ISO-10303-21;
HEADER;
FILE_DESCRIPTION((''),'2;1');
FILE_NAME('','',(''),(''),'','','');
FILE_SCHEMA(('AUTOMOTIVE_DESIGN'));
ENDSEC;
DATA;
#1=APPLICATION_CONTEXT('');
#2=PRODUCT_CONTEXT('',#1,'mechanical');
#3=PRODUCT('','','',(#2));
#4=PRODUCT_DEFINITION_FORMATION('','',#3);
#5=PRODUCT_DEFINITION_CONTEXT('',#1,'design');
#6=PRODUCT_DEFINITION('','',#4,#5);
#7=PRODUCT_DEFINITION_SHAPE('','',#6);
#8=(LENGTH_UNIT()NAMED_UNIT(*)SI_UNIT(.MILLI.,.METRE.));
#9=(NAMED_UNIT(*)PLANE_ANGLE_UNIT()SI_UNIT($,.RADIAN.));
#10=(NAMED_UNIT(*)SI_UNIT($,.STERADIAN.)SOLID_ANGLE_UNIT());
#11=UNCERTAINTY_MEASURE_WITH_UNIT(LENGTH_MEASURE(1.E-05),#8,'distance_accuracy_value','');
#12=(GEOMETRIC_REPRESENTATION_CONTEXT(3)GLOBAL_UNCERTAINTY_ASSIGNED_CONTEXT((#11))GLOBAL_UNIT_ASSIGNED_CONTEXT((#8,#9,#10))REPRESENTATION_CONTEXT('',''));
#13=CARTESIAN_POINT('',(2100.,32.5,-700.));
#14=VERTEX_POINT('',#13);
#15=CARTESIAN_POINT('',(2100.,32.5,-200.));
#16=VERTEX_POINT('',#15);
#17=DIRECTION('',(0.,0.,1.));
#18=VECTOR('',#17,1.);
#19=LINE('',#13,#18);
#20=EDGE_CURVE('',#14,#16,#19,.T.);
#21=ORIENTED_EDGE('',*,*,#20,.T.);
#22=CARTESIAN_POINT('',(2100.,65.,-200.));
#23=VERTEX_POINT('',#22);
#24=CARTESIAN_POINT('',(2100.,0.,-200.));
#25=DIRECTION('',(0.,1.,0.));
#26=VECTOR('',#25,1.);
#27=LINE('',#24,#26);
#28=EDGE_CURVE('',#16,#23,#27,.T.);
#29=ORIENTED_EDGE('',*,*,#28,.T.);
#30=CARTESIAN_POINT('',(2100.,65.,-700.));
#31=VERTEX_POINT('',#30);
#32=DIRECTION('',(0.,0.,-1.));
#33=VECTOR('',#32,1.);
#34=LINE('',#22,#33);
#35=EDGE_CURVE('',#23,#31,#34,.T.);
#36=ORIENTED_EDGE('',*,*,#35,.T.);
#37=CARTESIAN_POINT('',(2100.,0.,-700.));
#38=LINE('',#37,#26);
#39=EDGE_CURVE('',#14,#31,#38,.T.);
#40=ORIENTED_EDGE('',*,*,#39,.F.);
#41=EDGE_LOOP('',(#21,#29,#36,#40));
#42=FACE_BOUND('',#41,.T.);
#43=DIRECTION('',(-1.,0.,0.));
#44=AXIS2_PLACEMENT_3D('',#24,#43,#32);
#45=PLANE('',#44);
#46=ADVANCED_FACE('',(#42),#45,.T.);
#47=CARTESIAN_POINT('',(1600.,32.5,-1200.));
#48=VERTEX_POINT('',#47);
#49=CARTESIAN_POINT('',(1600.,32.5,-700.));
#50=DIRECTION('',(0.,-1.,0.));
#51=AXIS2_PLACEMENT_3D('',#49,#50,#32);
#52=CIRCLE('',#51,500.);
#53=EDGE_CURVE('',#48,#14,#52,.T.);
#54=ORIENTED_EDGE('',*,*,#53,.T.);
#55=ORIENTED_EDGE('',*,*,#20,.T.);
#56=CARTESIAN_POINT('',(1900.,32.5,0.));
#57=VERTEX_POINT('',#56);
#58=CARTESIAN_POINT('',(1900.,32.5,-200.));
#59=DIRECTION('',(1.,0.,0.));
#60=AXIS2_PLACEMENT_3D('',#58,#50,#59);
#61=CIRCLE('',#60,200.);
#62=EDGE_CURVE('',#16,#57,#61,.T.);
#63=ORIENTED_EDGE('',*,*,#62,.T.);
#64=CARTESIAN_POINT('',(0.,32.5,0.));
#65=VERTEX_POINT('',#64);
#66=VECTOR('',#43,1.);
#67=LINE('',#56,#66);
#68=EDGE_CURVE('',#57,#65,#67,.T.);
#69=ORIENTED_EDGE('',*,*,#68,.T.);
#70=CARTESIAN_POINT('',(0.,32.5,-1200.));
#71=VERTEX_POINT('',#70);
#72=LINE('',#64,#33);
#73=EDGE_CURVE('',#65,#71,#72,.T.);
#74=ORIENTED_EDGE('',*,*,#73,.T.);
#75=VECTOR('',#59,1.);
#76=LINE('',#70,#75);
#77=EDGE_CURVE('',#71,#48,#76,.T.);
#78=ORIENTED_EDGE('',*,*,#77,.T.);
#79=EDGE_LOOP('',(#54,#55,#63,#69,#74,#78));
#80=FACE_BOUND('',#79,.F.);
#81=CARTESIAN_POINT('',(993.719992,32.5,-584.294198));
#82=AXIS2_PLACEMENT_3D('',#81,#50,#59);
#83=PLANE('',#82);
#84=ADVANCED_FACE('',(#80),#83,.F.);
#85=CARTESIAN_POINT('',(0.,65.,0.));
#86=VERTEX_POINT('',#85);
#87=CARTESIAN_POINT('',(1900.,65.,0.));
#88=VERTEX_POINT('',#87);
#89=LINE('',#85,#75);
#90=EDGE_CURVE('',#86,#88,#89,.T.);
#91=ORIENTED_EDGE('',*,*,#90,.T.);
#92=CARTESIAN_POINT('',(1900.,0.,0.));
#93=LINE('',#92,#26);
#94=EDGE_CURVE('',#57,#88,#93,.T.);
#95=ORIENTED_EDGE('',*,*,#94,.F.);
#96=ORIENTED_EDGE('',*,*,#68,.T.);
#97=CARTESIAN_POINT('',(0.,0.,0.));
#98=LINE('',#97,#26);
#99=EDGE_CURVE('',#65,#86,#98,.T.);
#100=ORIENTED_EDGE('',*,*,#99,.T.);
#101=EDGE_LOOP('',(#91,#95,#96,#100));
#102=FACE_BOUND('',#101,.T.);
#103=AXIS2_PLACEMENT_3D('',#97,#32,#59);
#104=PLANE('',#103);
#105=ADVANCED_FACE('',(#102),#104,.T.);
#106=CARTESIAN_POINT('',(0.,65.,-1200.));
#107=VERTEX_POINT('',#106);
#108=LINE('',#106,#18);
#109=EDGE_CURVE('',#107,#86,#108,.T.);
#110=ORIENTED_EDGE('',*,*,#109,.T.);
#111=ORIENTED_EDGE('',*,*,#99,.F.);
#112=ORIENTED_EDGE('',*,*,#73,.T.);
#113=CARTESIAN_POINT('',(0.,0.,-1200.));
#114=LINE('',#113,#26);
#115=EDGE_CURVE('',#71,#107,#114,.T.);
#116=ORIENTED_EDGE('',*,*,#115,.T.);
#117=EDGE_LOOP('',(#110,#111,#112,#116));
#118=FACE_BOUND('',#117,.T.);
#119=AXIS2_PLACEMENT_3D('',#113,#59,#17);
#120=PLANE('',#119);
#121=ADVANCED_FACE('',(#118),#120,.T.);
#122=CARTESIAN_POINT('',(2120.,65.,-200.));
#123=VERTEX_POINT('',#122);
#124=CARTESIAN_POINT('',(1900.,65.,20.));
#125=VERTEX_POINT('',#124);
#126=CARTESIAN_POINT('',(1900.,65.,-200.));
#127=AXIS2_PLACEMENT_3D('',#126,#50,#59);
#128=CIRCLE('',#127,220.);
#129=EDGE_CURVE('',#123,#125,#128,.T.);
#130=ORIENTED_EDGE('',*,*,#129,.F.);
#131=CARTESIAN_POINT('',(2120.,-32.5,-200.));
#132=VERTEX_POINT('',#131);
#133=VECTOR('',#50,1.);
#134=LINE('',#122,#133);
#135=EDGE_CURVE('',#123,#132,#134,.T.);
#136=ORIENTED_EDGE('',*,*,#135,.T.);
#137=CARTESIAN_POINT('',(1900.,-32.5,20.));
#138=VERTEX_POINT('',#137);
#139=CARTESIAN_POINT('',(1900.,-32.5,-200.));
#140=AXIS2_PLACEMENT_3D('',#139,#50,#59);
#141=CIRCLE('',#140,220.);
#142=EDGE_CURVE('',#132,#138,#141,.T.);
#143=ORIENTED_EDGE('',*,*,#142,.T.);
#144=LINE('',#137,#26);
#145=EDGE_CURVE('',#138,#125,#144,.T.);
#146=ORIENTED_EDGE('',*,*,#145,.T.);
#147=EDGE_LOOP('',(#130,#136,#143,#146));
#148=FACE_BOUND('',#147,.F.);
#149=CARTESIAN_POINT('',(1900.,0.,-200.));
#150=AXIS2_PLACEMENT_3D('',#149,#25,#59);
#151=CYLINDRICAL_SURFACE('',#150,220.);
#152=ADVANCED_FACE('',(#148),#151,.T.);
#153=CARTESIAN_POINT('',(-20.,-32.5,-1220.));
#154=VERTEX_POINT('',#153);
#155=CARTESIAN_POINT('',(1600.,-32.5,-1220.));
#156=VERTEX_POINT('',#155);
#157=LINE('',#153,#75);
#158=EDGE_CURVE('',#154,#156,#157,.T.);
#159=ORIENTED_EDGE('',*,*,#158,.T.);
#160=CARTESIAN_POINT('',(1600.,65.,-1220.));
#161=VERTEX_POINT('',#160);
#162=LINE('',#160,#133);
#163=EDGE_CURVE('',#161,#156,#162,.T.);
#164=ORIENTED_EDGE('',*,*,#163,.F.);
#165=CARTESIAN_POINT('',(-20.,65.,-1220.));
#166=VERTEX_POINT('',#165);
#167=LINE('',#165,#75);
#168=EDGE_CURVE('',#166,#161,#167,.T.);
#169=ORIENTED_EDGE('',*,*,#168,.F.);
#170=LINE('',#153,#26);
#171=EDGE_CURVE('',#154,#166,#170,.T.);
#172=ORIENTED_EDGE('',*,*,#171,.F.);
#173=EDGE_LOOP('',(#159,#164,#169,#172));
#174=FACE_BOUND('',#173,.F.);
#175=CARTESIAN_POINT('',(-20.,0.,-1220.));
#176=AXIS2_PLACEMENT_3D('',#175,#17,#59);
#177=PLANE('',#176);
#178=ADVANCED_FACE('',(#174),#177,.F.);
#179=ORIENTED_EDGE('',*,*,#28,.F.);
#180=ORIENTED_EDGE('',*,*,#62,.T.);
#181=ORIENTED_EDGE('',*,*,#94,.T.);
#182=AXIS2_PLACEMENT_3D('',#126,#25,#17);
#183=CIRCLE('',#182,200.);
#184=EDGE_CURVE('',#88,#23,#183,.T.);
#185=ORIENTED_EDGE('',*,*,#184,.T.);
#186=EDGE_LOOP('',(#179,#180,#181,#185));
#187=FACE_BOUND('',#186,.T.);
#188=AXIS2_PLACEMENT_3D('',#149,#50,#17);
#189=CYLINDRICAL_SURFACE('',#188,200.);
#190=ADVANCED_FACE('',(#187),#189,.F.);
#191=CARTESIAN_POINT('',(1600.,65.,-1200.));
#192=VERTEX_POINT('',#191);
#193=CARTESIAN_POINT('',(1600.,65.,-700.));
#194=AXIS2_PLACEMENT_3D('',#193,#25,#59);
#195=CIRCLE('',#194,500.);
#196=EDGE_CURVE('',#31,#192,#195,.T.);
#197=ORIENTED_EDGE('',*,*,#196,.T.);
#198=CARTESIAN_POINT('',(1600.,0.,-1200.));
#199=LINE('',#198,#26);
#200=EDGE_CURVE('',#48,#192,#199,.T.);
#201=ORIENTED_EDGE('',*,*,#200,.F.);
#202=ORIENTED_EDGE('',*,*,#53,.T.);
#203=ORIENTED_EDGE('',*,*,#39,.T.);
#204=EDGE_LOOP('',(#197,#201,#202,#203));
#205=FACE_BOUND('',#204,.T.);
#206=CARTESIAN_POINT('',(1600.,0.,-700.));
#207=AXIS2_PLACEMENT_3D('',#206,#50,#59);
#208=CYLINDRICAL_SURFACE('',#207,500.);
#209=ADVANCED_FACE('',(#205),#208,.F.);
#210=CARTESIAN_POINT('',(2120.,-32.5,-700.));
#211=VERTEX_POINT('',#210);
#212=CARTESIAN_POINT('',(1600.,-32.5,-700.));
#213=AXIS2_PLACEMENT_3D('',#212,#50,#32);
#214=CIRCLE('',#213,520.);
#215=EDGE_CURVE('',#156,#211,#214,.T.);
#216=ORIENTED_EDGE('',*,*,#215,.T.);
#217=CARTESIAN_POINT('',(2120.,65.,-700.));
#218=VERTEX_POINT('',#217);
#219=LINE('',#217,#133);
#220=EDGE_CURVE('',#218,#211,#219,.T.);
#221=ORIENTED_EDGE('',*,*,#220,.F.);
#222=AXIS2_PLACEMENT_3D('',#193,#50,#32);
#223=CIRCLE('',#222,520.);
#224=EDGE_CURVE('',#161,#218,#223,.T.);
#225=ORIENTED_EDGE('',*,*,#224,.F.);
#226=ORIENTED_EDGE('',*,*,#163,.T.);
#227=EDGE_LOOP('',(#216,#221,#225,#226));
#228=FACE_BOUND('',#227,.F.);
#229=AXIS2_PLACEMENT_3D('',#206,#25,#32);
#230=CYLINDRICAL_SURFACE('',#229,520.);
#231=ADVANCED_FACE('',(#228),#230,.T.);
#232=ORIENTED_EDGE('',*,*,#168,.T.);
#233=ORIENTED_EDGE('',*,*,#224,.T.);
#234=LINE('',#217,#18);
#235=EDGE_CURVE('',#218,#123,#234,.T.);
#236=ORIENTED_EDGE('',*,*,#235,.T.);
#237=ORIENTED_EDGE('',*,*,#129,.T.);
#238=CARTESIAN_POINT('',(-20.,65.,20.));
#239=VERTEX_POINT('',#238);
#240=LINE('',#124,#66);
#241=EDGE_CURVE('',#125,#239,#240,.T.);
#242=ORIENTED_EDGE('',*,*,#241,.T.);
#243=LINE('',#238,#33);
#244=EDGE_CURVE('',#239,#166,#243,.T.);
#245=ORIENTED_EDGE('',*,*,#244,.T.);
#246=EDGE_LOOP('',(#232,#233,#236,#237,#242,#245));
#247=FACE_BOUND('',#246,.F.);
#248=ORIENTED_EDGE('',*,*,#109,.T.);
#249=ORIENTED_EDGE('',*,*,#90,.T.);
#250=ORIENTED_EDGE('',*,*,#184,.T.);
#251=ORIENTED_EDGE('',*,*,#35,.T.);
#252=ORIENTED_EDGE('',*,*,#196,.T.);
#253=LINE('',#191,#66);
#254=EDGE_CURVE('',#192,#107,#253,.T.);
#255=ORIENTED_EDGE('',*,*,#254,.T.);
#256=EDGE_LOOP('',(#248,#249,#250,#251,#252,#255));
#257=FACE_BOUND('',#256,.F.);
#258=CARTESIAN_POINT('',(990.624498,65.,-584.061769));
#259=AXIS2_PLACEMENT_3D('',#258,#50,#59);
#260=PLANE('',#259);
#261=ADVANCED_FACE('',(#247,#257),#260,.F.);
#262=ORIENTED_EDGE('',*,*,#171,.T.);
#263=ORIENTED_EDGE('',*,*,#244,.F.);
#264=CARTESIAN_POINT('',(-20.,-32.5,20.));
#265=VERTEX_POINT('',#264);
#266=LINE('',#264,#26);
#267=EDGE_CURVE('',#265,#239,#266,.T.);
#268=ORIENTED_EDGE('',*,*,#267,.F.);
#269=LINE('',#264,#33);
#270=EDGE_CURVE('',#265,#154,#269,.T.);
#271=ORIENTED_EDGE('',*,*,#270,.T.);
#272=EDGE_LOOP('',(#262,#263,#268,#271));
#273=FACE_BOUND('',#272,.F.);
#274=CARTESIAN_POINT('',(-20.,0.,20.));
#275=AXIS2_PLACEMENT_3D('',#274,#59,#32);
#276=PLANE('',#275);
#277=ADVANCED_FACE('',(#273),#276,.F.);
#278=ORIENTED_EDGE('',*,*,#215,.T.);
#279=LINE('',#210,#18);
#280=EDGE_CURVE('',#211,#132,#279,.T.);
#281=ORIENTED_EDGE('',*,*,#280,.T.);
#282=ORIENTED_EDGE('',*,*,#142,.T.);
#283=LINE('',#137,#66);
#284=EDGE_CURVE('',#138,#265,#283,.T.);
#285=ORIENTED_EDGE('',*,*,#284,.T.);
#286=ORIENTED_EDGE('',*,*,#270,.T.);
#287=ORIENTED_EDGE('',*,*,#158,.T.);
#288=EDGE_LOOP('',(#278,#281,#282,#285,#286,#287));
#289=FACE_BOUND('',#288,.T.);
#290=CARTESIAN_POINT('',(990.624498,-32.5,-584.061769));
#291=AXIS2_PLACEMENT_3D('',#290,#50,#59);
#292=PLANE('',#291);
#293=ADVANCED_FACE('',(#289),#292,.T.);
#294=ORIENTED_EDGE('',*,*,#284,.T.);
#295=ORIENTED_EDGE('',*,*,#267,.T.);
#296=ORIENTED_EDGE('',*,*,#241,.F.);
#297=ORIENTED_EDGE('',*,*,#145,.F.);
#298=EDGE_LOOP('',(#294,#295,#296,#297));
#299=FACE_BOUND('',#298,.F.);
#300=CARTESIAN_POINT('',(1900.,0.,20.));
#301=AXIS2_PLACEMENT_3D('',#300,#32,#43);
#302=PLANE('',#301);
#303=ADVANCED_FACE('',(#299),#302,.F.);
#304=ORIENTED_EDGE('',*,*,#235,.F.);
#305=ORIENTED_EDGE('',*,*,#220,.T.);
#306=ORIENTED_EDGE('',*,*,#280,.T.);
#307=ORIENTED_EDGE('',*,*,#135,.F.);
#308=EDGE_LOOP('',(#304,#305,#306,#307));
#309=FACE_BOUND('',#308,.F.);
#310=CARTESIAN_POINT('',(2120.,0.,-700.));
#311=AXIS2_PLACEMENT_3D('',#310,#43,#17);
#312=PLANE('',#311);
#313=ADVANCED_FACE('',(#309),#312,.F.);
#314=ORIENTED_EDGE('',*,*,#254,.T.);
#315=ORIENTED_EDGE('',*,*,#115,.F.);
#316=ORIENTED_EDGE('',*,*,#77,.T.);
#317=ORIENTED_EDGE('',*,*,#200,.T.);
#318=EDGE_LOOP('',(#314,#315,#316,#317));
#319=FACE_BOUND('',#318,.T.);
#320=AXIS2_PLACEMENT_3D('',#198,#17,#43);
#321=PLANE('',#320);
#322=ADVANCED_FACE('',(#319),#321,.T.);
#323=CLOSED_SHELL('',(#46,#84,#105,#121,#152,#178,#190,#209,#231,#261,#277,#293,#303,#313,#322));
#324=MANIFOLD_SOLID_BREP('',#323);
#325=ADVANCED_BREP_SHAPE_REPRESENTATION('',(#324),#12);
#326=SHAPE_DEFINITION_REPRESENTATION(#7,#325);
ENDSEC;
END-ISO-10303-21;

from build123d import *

# Parameters (mm, degrees)
F1_DEPTH = 32.5
F2_DEPTH = 65
F3_DEPTH = 32.5


# Not quite as in the source:
# - a feature names something its author has since deleted; it is built from what else it names


with BuildPart() as f1:
    # F0 (on Front) → F1 (new body, symmetric)
    with BuildSketch(Plane.XZ):
        with BuildLine():
            Line((1900, 0), (0, 0))
            Line((0, 0), (0, -1200))
            Line((0, -1200), (1600, -1200))
            ThreePointArc((1600, -1200), (1953.5533905933, -1053.5533905933), (2100, -700))
            Line((2100, -700), (2100, -200))
            ThreePointArc((2100, -200), (2041.4213562373, -58.5786437627), (1900, 0))
        make_face()
    extrude(amount=F1_DEPTH, both=True)

    # F0 (on Front) → F2 (join)
    with BuildSketch(Plane.XZ):
        with BuildLine():
            Line((-20, -1220), (1600, -1220))
            ThreePointArc((1600, -1220), (1967.695526217, -1067.695526217), (2120, -700))
            Line((2120, -700), (2120, -200))
            ThreePointArc((2120, -200), (2055.563491861, -44.436508139), (1900, 20))
            Line((1900, 20), (-20, 20))
            Line((-20, 20), (-20, -1220))
        make_face()
        with BuildLine():
            Line((0, -1200), (0, 0))
            Line((0, 0), (1900, 0))
            ThreePointArc((1900, 0), (2041.4213562373, -58.5786437627), (2100, -200))
            Line((2100, -200), (2100, -700))
            ThreePointArc((2100, -700), (1953.5533905933, -1053.5533905933), (1600, -1200))
            Line((1600, -1200), (0, -1200))
        make_face(mode=Mode.SUBTRACT)
    extrude(amount=-F2_DEPTH)

    # F0 (on Front) → F3 (join)
    with BuildSketch(Plane.XZ):
        with BuildLine():
            Line((-20, -1220), (1600, -1220))
            ThreePointArc((1600, -1220), (1967.695526217, -1067.695526217), (2120, -700))
            Line((2120, -700), (2120, -200))
            ThreePointArc((2120, -200), (2055.563491861, -44.436508139), (1900, 20))
            Line((1900, 20), (-20, 20))
            Line((-20, 20), (-20, -1220))
        make_face()
        with BuildLine():
            Line((0, -1200), (0, 0))
            Line((0, 0), (1900, 0))
            ThreePointArc((1900, 0), (2041.4213562373, -58.5786437627), (2100, -200))
            Line((2100, -200), (2100, -700))
            ThreePointArc((2100, -700), (1953.5533905933, -1053.5533905933), (1600, -1200))
            Line((1600, -1200), (0, -1200))
        make_face(mode=Mode.SUBTRACT)
    extrude(amount=F3_DEPTH)


solid = f1.part
